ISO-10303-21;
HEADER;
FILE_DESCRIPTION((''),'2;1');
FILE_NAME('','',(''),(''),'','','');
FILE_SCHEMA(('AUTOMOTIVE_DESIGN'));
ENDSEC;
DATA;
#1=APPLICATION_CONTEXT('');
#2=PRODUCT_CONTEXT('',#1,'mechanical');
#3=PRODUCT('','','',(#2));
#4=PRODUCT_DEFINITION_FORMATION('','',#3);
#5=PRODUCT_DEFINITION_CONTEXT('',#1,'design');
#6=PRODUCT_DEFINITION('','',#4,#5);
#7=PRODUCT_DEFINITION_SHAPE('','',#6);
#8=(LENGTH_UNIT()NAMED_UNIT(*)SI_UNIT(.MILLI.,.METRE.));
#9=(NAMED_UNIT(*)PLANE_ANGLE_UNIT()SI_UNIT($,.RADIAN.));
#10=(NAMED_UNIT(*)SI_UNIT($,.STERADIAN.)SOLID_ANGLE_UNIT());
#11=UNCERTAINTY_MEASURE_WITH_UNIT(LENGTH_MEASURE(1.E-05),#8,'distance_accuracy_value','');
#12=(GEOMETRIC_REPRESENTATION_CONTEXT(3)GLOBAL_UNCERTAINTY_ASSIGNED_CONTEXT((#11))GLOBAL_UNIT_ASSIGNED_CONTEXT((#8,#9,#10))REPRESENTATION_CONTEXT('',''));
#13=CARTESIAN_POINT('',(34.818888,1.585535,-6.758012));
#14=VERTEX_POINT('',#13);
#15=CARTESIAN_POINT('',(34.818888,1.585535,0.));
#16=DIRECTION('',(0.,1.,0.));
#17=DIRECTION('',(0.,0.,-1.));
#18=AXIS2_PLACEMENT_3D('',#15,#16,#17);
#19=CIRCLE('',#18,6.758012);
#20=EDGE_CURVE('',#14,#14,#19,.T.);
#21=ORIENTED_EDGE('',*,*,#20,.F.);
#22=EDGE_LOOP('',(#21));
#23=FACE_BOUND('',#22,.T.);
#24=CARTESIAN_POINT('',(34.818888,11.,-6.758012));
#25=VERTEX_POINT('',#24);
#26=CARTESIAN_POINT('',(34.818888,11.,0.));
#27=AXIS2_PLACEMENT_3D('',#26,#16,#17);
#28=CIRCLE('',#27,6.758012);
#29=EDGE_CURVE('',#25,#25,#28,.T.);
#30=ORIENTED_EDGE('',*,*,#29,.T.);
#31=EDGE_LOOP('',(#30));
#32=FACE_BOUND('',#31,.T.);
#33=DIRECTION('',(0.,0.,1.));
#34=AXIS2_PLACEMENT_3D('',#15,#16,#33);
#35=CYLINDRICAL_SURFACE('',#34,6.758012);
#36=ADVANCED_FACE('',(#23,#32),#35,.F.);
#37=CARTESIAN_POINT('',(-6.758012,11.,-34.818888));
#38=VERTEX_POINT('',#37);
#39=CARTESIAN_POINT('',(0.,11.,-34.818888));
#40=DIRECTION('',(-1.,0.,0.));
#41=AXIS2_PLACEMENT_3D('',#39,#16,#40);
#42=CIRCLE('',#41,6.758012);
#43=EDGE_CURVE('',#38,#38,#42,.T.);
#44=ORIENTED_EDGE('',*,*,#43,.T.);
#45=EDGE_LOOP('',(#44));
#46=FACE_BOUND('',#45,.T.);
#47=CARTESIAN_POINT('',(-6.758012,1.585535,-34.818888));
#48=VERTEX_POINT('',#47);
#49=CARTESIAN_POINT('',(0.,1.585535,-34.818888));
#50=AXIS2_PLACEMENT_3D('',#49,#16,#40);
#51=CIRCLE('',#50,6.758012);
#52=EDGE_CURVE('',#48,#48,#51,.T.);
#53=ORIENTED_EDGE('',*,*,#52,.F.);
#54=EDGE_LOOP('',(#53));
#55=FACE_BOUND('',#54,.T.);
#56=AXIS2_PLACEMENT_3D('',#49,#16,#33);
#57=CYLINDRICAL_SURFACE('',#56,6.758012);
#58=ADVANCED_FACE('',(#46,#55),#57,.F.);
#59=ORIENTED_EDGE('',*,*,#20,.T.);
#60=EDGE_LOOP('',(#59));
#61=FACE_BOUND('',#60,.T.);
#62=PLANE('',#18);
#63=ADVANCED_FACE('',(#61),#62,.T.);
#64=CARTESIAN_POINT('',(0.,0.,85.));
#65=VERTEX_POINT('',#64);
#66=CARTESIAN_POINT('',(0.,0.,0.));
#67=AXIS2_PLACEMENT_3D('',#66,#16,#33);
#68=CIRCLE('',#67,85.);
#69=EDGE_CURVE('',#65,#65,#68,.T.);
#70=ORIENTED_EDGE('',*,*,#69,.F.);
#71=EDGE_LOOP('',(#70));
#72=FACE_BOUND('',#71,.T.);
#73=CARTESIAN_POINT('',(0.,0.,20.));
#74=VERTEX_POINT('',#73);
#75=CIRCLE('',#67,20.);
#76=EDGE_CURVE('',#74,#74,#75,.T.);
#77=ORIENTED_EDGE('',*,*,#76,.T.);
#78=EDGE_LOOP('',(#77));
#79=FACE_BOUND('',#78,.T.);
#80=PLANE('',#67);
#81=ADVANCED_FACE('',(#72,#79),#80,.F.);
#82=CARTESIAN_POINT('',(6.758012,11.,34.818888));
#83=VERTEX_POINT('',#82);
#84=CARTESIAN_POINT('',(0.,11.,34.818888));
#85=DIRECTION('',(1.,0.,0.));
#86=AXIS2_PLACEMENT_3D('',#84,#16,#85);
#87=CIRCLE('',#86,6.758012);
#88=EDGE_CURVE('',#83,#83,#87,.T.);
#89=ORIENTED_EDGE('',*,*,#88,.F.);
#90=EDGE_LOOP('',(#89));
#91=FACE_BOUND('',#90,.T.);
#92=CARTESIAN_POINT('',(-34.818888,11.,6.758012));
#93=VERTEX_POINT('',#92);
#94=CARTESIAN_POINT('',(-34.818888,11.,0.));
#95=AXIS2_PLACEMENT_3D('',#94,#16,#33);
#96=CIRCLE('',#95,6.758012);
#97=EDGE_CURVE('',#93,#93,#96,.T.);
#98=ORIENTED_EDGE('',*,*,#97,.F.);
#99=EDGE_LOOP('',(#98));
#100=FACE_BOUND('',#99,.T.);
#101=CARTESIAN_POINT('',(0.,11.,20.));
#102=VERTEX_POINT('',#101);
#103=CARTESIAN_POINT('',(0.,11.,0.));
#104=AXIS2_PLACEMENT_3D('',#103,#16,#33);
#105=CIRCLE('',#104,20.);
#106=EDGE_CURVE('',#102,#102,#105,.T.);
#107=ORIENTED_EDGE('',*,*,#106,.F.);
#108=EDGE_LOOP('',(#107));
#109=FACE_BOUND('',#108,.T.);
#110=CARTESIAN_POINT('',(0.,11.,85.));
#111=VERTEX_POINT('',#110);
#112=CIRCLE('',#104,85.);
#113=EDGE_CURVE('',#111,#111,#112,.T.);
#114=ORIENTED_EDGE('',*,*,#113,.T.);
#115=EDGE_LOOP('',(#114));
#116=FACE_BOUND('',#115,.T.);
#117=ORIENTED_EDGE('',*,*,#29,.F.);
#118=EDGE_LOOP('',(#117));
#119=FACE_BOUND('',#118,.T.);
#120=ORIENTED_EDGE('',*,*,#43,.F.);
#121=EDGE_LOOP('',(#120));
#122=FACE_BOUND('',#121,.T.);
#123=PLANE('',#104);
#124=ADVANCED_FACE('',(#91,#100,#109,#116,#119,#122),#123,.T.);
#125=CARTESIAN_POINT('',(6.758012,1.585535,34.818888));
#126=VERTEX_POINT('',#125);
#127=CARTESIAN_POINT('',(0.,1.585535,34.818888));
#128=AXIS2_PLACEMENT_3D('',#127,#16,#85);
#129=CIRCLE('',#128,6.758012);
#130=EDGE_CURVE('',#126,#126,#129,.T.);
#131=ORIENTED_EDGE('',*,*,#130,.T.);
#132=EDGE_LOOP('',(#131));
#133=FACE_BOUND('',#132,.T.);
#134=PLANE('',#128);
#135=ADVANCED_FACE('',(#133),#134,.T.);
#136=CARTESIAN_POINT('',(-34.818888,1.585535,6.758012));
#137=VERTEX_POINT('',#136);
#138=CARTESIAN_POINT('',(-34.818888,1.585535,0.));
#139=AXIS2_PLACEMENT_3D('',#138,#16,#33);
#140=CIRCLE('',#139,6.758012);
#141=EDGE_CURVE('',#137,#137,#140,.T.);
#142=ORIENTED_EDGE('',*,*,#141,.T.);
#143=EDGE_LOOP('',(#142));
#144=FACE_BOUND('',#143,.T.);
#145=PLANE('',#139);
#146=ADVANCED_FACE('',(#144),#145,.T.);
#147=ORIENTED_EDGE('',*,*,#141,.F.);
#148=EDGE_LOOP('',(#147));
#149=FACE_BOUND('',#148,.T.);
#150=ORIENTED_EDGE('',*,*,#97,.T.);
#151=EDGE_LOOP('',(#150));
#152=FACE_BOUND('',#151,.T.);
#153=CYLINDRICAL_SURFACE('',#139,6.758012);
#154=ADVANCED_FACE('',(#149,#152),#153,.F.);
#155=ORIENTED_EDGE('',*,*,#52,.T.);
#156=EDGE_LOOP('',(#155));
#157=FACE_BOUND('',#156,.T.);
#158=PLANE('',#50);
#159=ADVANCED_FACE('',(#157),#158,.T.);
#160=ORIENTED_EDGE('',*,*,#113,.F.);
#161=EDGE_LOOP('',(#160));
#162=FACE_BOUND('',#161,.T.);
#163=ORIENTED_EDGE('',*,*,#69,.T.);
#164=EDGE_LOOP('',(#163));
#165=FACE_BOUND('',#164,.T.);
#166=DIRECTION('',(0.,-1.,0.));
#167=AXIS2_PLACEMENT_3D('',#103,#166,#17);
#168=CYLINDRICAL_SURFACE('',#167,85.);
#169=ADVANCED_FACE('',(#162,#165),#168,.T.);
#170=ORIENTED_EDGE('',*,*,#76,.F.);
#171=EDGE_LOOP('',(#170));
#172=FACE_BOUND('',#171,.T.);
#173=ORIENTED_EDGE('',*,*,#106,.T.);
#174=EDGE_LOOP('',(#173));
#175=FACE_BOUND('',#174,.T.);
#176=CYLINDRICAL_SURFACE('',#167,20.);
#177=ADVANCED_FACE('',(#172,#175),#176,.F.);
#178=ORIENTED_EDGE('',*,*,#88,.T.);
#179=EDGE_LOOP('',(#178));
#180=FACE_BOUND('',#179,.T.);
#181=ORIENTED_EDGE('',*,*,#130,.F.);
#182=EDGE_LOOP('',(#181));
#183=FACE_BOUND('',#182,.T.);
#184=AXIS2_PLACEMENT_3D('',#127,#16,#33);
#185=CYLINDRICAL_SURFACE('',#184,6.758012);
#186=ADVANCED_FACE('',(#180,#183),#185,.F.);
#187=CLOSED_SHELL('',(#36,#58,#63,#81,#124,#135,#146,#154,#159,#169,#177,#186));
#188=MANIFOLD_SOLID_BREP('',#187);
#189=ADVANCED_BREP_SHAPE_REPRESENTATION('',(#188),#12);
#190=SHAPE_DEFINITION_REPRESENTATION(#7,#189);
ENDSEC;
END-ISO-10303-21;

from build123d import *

# Parameters (mm, degrees)
SKETCH1_R           = 85
BOSS_EXTRUDE1_DEPTH = 11
SKETCH2_R           = 20
CUT_EXTRUDE1_DEPTH  = 121.710397232
SKETCH3_R           = 6.758012093
CUT_EXTRUDE2_DEPTH  = 9.414464531
CIRPATTERN1_COUNT   = 4


with BuildPart() as part:
    # Sketch1 → Boss-Extrude1 (new body)
    with BuildSketch(Plane(origin=(0, 0, 0), x_dir=(1, 0, 0), z_dir=(0, 1, 0))):
        Circle(SKETCH1_R)
    extrude(amount=BOSS_EXTRUDE1_DEPTH)

    # Sketch2 → Cut-Extrude1 (cut, through all)
    with BuildSketch(Plane(origin=(0, 0, 0), x_dir=(1, 0, 0), z_dir=(0, 1, 0))):
        Circle(SKETCH2_R)
    extrude(amount=CUT_EXTRUDE1_DEPTH, mode=Mode.SUBTRACT)

    # Sketch3 → Cut-Extrude2 (cut)
    with BuildSketch(Plane(origin=(0, 11, 0), x_dir=(1, 0, 0), z_dir=(0, 1, 0))):
        with Locations((-34.818888407, 0)):
            Circle(SKETCH3_R)
    cut_extrude2 = extrude(amount=-CUT_EXTRUDE2_DEPTH, mode=Mode.SUBTRACT)

    # CirPattern1: Cut-Extrude2 ×4 about axis
    cirpattern1_axis = Axis((0, 0, 0), (0, 1, 0))
    for i in range(1, CIRPATTERN1_COUNT):
        add(cut_extrude2.rotate(cirpattern1_axis, i * 360 / CIRPATTERN1_COUNT), mode=Mode.SUBTRACT)


solid = part.part
